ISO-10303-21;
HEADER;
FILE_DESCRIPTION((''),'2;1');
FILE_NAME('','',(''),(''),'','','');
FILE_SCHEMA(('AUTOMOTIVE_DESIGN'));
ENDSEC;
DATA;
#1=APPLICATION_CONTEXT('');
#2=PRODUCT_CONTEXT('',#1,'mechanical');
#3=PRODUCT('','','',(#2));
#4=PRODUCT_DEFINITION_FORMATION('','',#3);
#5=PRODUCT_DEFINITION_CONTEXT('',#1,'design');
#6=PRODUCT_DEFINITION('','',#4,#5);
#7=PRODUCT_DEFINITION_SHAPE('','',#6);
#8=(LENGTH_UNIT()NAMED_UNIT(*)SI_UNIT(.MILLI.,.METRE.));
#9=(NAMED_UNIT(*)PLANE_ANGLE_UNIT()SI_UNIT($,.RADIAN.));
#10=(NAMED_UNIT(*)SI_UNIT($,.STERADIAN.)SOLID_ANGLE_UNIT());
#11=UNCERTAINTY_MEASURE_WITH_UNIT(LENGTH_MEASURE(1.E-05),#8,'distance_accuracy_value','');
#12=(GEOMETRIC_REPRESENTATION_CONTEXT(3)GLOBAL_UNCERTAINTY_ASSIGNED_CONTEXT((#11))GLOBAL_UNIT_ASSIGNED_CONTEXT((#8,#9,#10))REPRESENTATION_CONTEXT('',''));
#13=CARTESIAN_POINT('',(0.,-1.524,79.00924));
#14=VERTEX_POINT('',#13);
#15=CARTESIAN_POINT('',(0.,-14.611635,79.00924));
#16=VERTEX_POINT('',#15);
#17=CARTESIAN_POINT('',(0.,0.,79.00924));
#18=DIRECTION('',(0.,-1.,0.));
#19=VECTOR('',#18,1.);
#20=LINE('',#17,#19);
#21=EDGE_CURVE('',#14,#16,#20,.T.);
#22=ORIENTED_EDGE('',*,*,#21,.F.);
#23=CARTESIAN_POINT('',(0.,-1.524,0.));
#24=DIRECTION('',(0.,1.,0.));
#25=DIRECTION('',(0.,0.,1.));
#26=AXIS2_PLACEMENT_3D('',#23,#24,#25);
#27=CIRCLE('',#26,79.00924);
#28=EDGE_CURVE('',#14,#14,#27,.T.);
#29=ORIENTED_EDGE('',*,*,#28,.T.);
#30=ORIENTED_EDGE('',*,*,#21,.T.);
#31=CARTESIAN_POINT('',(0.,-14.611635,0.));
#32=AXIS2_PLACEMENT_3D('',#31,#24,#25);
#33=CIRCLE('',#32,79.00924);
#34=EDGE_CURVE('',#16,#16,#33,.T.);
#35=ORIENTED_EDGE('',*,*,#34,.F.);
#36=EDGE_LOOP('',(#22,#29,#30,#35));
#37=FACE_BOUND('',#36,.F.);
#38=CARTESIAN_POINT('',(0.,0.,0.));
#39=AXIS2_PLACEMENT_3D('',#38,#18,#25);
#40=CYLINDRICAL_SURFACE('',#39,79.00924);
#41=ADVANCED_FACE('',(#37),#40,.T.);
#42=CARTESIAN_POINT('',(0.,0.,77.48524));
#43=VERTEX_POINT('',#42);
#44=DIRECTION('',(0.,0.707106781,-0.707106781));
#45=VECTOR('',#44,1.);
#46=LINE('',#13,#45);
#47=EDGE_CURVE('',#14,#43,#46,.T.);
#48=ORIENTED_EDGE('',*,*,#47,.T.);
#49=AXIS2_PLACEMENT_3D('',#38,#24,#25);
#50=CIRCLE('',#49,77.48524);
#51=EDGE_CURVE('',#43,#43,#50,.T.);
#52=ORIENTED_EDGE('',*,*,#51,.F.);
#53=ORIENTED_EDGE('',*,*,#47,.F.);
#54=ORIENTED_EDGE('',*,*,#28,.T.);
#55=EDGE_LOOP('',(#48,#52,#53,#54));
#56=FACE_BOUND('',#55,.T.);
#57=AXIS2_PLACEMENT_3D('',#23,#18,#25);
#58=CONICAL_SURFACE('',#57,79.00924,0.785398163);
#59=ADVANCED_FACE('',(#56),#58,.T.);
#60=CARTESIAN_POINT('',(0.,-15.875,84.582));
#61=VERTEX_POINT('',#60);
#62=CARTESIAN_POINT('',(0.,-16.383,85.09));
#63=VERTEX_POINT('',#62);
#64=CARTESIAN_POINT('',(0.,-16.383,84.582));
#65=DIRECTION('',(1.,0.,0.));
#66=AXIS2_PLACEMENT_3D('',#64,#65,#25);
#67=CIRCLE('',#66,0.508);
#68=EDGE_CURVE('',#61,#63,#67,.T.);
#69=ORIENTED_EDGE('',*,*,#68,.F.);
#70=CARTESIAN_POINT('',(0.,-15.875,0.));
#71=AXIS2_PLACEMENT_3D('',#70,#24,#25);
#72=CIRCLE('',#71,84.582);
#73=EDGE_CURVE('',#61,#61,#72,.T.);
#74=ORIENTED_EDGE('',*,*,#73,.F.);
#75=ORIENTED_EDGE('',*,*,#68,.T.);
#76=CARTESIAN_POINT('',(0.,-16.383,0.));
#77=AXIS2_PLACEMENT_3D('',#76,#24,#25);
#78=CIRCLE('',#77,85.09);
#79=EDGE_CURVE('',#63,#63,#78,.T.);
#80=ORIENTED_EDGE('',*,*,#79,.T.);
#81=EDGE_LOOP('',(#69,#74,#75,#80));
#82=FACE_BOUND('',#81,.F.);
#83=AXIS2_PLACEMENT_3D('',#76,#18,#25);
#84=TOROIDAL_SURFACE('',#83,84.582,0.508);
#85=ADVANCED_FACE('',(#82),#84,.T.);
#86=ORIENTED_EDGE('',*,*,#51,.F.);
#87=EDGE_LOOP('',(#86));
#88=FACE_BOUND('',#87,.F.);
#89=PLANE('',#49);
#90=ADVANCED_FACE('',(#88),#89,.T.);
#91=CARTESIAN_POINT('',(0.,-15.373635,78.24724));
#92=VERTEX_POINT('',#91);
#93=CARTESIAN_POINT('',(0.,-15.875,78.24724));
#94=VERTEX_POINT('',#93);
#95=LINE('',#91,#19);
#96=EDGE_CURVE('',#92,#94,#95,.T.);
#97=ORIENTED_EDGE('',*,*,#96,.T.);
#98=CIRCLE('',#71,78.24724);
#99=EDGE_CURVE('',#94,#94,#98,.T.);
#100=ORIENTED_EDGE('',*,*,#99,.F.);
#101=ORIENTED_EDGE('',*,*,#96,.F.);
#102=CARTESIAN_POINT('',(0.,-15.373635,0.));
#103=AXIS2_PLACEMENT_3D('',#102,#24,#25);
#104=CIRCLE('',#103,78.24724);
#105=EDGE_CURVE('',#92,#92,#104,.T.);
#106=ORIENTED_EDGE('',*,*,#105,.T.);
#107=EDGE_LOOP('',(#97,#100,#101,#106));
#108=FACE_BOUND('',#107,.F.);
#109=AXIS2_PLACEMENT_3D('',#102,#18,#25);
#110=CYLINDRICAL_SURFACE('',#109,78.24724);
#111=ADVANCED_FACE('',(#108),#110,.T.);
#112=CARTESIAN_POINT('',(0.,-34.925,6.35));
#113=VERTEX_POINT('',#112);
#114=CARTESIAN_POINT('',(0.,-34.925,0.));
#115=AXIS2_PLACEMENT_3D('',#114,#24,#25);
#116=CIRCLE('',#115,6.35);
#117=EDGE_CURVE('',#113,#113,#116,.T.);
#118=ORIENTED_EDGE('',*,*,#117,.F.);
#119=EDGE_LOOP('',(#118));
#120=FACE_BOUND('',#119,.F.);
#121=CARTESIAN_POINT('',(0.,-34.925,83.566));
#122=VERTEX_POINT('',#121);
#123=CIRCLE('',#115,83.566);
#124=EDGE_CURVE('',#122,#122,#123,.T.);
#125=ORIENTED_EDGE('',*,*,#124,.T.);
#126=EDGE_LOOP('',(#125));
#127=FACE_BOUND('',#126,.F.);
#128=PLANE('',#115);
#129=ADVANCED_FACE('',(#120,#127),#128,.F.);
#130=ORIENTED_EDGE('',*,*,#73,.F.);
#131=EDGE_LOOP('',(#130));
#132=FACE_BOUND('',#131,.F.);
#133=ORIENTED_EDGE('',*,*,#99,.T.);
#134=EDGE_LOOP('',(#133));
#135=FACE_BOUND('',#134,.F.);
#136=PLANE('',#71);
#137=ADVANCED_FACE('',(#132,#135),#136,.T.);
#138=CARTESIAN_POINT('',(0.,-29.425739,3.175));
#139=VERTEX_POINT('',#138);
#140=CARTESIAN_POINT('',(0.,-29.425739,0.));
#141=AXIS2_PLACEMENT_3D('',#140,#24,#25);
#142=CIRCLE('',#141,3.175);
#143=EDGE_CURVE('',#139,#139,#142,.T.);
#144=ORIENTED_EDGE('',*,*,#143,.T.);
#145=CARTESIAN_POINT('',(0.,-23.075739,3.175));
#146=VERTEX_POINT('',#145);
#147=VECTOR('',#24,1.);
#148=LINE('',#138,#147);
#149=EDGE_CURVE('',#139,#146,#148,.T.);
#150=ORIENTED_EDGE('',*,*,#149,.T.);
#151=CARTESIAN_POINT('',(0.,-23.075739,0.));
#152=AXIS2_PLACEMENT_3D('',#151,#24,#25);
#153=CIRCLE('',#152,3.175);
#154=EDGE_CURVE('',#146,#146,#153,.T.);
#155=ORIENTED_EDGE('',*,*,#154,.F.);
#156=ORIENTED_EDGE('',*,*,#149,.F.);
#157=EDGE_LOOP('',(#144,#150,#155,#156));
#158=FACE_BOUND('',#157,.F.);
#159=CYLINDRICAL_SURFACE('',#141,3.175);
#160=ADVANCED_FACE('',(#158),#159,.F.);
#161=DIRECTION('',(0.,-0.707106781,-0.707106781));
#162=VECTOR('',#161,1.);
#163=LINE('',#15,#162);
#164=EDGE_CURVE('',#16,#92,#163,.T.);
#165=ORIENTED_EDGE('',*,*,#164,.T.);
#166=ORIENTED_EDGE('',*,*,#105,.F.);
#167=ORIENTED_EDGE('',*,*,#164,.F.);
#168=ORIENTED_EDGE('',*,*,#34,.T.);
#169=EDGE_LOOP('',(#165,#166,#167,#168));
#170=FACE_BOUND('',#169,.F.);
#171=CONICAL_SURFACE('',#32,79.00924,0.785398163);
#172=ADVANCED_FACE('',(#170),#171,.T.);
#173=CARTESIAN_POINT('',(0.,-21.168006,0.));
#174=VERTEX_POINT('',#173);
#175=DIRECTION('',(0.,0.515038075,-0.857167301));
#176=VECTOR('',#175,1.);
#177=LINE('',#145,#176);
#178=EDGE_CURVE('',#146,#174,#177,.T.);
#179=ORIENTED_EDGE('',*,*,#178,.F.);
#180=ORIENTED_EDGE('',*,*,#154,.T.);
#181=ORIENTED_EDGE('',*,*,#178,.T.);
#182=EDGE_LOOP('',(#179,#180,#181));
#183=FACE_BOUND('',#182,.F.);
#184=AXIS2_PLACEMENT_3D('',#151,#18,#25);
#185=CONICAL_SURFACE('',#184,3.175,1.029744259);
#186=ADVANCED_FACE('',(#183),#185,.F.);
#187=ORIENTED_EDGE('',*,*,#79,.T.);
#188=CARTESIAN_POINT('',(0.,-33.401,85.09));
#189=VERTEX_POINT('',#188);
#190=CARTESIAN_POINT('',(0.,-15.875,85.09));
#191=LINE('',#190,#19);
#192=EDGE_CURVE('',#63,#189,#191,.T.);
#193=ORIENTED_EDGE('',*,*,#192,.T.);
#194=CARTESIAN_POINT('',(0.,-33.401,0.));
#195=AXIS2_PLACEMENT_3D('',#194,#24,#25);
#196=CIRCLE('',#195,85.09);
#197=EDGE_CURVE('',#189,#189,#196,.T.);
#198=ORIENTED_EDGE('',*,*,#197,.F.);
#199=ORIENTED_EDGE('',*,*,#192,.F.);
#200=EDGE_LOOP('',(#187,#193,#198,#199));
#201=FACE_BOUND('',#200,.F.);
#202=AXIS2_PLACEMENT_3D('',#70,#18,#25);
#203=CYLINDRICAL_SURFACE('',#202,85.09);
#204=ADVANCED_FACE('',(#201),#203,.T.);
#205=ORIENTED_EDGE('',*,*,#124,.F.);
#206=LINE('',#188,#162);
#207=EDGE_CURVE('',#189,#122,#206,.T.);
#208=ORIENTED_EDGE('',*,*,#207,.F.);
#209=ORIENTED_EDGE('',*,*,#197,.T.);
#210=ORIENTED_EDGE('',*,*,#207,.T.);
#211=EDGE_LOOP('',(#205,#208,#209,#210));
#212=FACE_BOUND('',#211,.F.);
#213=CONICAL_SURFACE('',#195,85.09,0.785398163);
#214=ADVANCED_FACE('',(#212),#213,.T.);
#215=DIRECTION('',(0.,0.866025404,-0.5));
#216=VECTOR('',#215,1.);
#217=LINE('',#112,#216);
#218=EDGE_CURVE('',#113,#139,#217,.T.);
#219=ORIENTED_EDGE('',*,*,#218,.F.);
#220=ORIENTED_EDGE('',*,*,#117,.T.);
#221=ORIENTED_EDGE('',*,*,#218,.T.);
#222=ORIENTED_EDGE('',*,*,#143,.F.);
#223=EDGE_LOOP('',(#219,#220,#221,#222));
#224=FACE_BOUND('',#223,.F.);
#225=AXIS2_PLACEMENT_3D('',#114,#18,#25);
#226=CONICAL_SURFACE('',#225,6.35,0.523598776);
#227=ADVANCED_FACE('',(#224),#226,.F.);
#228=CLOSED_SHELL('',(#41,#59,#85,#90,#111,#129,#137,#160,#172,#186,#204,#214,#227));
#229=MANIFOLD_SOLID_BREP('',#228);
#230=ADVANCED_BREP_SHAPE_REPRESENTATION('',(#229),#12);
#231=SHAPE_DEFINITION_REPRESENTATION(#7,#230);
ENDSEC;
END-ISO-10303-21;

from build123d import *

# Parameters (mm, degrees)
F2_R    = 0.508
F3_SIZE = 1.524


with BuildPart() as f1:
    # F0 (on Right) → F1 (revolve)
    with BuildSketch(Plane.YZ):
        Polygon((-21.1680062206, 0), (0, 0), (0, 79.00924), (-14.6116351058, 79.00924), (-15.3736351058, 78.24724), (-15.875, 78.24724), (-15.875, 79.00924), (-15.875, 85.09), (-34.925, 85.09), (-34.925, 6.35), (-29.425738686, 3.175), (-23.075738686, 3.175), align=None)
    revolve(axis=Axis((0, -21.1680062206, 0), (0, 1, 0)))

    # F2
    f2_edges = [f1.edges().sort_by_distance(p)[0] for p in [
        (0, -15.875, -85.09),
    ]]
    fillet(f2_edges, radius=F2_R)

    # F3
    f3_edges = [f1.edges().sort_by_distance(p)[0] for p in [
        (0, 0, -79.00924),
        (0, -34.925, -85.09),
    ]]
    chamfer(f3_edges, length=F3_SIZE)


solid = f1.part
